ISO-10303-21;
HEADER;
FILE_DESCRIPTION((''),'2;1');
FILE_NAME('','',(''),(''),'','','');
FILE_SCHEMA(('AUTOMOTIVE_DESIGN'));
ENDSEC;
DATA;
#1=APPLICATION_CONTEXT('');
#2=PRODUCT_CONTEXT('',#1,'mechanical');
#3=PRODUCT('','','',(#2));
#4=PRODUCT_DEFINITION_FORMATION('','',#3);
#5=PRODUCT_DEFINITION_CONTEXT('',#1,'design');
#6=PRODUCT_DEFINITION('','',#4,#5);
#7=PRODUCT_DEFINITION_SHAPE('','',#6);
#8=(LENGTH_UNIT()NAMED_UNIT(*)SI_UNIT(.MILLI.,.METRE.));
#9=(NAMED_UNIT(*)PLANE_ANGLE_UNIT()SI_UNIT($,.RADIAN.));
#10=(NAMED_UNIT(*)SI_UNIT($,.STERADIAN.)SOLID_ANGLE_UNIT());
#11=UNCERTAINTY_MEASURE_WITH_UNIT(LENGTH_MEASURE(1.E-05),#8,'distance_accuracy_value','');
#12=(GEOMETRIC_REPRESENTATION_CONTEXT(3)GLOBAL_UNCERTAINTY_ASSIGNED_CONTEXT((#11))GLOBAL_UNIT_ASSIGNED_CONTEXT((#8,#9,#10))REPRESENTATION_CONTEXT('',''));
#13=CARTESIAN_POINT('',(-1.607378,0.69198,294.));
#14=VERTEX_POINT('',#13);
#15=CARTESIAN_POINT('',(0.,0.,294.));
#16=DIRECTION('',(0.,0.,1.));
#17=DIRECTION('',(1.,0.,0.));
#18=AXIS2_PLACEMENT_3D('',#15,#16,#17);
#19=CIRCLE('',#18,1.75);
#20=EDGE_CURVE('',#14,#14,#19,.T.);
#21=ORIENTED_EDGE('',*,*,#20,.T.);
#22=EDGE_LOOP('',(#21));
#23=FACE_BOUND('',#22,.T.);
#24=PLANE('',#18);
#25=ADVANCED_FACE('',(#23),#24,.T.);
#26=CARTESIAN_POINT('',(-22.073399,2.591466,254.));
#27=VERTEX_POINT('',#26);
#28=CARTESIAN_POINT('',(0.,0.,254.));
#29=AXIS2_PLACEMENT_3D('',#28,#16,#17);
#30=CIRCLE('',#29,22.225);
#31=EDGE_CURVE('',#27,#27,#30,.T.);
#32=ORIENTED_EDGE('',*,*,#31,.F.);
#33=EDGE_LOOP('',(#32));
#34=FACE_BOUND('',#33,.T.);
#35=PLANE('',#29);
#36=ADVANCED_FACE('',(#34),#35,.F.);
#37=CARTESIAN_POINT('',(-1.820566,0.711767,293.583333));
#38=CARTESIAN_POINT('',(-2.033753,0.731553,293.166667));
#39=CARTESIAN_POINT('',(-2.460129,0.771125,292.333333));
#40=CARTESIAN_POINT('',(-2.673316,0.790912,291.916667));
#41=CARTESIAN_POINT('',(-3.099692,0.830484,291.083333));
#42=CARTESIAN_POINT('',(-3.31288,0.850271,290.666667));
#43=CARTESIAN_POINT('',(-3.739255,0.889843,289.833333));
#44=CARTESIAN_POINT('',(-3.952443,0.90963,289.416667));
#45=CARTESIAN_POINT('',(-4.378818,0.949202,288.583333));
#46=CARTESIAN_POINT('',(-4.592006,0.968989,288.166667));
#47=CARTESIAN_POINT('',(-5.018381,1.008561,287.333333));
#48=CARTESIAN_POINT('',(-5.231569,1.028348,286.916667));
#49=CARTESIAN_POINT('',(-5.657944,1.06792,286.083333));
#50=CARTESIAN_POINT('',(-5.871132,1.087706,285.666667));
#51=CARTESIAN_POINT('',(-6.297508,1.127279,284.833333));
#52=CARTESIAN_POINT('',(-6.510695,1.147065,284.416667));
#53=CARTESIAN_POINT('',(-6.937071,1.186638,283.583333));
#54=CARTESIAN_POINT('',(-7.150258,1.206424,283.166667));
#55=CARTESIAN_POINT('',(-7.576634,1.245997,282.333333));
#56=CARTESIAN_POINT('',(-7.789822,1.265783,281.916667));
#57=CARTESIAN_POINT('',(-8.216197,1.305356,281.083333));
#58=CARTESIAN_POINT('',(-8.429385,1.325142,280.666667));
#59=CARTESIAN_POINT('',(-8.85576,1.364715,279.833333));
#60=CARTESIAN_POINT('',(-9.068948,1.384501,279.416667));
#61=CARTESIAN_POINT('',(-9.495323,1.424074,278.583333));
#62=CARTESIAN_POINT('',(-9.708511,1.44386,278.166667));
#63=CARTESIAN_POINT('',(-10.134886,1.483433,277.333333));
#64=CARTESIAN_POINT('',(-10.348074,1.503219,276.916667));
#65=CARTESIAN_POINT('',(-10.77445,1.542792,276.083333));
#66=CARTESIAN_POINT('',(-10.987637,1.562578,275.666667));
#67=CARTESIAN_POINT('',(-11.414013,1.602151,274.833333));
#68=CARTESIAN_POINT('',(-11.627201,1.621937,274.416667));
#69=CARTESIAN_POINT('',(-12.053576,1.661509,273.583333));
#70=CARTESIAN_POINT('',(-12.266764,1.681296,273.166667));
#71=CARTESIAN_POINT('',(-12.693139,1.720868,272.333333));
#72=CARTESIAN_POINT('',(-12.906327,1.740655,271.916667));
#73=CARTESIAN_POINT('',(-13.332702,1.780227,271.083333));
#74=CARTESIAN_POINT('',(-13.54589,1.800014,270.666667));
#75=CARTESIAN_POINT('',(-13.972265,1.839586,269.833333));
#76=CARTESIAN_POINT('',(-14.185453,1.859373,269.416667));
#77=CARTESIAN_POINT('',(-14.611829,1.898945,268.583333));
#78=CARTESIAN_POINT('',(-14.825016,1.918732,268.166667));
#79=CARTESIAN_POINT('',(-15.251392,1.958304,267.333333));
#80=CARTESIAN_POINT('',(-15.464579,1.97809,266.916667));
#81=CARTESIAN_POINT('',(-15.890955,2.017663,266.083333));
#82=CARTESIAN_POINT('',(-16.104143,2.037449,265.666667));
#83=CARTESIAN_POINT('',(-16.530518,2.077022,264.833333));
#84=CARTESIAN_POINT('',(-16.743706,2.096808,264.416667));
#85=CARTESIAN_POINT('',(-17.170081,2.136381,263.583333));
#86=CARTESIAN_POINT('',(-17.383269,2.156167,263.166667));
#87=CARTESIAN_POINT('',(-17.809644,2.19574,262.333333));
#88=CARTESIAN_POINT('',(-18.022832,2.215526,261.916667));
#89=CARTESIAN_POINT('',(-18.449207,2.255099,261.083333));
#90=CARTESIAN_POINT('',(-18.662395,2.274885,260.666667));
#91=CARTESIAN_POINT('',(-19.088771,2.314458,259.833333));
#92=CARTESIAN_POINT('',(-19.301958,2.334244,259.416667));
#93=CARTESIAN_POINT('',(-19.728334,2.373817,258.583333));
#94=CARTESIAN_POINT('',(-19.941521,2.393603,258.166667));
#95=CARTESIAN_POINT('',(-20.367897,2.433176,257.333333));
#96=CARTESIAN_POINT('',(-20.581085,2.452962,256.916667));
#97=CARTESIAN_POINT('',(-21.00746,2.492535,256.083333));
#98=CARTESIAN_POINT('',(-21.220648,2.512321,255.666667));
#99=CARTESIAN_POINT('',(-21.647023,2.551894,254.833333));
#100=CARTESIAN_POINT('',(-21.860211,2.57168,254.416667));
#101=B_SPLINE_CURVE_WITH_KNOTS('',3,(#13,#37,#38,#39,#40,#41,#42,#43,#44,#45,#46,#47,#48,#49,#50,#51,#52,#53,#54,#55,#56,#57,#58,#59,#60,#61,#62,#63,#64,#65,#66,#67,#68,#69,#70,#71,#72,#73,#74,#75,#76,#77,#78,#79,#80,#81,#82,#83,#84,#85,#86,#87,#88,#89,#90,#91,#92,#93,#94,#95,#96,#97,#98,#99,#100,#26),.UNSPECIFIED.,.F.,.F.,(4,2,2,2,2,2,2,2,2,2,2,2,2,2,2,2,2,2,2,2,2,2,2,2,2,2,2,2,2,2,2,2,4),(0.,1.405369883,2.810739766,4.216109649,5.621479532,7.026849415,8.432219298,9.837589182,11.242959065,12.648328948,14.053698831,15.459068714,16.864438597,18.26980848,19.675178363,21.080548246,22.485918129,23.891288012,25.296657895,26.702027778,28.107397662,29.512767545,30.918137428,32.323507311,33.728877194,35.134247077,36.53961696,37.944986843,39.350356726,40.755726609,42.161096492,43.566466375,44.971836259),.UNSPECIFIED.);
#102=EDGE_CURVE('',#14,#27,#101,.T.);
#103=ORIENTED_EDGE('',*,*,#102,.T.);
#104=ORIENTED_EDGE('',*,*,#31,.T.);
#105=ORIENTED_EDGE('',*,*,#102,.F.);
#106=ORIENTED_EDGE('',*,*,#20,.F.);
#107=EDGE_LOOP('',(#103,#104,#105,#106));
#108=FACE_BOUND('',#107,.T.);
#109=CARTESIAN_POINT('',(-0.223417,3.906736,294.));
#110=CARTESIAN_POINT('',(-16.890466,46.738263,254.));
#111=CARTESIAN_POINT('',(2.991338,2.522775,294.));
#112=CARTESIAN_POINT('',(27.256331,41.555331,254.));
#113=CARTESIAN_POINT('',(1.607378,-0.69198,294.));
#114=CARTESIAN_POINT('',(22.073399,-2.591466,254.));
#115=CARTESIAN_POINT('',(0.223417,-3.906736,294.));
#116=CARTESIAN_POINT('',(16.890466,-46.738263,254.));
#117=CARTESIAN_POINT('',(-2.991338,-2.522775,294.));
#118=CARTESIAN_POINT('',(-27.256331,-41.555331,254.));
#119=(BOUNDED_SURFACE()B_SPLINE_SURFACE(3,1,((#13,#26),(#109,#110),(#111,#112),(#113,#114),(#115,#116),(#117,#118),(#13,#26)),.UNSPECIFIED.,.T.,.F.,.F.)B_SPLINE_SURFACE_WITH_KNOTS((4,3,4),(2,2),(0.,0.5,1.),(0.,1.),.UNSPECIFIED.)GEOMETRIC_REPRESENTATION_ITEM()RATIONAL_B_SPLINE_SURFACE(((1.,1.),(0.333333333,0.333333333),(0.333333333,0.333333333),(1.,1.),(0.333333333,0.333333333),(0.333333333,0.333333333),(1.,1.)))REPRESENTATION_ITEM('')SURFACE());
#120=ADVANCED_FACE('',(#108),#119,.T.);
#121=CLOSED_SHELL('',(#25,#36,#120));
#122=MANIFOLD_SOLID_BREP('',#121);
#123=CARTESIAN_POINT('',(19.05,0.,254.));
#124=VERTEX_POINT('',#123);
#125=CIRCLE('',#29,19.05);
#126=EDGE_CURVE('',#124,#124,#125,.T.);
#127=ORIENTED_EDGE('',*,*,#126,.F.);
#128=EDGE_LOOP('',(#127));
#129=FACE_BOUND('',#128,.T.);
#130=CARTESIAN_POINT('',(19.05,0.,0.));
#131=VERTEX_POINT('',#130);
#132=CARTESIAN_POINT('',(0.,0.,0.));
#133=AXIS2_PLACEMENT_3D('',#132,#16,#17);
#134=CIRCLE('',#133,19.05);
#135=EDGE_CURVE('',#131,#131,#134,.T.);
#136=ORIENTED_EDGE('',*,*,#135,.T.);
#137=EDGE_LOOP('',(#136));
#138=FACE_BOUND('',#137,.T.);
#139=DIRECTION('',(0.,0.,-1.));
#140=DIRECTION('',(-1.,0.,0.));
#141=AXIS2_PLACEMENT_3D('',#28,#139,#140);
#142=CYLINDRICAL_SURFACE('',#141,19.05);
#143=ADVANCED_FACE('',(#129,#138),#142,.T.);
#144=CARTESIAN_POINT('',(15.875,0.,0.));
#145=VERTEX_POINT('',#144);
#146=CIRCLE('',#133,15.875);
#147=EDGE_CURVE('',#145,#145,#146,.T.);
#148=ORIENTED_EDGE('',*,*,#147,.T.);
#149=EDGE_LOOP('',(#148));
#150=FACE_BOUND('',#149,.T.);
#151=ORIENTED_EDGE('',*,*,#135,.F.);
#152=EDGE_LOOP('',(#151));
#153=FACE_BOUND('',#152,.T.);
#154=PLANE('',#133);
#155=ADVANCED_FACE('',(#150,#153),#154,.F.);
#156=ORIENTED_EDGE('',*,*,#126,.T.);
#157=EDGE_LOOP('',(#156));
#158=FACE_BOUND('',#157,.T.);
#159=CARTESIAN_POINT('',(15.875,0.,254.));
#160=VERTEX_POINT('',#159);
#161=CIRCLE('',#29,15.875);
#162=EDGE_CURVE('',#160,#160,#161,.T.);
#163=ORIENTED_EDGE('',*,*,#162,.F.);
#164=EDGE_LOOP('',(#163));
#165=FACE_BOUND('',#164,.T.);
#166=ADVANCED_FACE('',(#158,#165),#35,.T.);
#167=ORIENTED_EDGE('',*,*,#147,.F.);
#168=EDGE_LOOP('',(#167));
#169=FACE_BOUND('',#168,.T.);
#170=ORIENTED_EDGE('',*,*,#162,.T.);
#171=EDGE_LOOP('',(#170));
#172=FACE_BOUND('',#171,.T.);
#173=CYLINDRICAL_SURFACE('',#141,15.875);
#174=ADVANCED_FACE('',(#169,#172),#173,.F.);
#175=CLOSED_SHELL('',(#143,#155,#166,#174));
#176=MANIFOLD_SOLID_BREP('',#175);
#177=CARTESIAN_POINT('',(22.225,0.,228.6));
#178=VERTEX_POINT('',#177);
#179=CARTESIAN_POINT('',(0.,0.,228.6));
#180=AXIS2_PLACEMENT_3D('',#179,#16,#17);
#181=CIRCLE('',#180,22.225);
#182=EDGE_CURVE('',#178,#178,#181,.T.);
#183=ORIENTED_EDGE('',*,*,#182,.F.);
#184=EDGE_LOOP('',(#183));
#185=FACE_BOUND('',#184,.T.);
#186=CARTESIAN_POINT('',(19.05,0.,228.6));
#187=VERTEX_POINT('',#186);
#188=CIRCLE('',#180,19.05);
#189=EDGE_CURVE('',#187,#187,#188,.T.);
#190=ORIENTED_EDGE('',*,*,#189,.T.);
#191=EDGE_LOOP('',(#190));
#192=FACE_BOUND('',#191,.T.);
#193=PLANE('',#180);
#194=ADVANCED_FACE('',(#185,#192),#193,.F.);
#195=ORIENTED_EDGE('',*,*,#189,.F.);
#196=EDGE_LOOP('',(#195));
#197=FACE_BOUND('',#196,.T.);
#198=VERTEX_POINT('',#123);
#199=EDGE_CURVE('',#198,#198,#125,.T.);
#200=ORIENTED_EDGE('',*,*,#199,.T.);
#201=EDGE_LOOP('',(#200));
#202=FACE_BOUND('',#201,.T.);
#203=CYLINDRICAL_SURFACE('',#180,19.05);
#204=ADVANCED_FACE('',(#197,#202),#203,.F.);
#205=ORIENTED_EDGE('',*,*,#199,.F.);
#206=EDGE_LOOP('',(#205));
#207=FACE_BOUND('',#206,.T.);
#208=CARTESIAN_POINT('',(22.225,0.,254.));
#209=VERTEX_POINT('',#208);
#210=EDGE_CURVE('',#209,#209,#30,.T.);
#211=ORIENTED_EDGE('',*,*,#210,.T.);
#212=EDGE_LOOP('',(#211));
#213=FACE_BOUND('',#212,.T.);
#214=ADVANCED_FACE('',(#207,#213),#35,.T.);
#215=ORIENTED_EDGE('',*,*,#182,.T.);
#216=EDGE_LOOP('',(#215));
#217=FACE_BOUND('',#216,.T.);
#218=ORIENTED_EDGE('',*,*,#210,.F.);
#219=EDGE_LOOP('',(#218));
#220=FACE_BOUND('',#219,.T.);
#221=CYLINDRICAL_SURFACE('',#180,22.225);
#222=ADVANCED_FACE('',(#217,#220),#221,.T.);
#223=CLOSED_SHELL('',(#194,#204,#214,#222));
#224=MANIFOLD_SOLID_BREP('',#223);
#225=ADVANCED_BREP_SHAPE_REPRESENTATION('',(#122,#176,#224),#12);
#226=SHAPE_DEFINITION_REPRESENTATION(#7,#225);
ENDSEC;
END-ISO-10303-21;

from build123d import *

# Parameters (mm, degrees)
SKETCH1_R           = 19.05
SKETCH1_R_2         = 15.875
BOSS_EXTRUDE1_DEPTH = 254
SKETCH2_R           = 22.225
SKETCH2_R_2         = 19.05
BOSS_EXTRUDE2_DEPTH = 25.4


with BuildPart() as part:
    # Sketch1 → Boss-Extrude1 (new body)
    with BuildSketch(Plane.XY):
        Circle(SKETCH1_R)
        Circle(SKETCH1_R_2, mode=Mode.SUBTRACT)
    extrude(amount=BOSS_EXTRUDE1_DEPTH)


with BuildPart() as body_2:
    # Sketch2 → Boss-Extrude2 (new body)
    with BuildSketch(Plane.XY.offset(254)):
        Circle(SKETCH2_R)
        Circle(SKETCH2_R_2, mode=Mode.SUBTRACT)
    extrude(amount=-BOSS_EXTRUDE2_DEPTH)


with BuildPart() as body_3:
    # Loft1: read off the stored shape, not the designer's step
    # Loft1: loft between two sections, ruled curve by curve
    loft1_from = [
        Edge.make_bspline([(-1.607377802, 0.691980204, 294), (-0.223417394, 3.906735807, 294), (2.99133821, 2.522775399, 294), (1.607377802, -0.691980204, 294), (0.223417394, -3.906735807, 294), (-2.99133821, -2.522775399, 294), (-1.607377802, 0.691980204, 294)], [0, 0, 0, 0, 0.5, 0.5, 0.5, 1, 1, 1, 1], 3, [1, 0.333333333, 0.333333333, 1, 0.333333333, 0.333333333, 1]),
    ]
    loft1_to = [
        Edge.make_bspline([(-22.073398658, 2.591466124, 254), (-16.890466409, 46.738263441, 254), (27.256330907, 41.555331192, 254), (22.073398658, -2.591466124, 254), (16.890466409, -46.738263441, 254), (-27.256330907, -41.555331192, 254), (-22.073398658, 2.591466124, 254)], [0, 0, 0, 0, 0.5, 0.5, 0.5, 1, 1, 1, 1], 3, [1, 0.333333333, 0.333333333, 1, 0.333333333, 0.333333333, 1]),
    ]
    loft1 = Solid(Shell([*[Face.make_surface_from_curves(loft1_from[k], loft1_to[k]) for k in range(1)], Face(Wire(loft1_from)), Face(Wire(loft1_to))]))
    add(loft1)


solid = Compound([part.part, body_2.part, body_3.part])
